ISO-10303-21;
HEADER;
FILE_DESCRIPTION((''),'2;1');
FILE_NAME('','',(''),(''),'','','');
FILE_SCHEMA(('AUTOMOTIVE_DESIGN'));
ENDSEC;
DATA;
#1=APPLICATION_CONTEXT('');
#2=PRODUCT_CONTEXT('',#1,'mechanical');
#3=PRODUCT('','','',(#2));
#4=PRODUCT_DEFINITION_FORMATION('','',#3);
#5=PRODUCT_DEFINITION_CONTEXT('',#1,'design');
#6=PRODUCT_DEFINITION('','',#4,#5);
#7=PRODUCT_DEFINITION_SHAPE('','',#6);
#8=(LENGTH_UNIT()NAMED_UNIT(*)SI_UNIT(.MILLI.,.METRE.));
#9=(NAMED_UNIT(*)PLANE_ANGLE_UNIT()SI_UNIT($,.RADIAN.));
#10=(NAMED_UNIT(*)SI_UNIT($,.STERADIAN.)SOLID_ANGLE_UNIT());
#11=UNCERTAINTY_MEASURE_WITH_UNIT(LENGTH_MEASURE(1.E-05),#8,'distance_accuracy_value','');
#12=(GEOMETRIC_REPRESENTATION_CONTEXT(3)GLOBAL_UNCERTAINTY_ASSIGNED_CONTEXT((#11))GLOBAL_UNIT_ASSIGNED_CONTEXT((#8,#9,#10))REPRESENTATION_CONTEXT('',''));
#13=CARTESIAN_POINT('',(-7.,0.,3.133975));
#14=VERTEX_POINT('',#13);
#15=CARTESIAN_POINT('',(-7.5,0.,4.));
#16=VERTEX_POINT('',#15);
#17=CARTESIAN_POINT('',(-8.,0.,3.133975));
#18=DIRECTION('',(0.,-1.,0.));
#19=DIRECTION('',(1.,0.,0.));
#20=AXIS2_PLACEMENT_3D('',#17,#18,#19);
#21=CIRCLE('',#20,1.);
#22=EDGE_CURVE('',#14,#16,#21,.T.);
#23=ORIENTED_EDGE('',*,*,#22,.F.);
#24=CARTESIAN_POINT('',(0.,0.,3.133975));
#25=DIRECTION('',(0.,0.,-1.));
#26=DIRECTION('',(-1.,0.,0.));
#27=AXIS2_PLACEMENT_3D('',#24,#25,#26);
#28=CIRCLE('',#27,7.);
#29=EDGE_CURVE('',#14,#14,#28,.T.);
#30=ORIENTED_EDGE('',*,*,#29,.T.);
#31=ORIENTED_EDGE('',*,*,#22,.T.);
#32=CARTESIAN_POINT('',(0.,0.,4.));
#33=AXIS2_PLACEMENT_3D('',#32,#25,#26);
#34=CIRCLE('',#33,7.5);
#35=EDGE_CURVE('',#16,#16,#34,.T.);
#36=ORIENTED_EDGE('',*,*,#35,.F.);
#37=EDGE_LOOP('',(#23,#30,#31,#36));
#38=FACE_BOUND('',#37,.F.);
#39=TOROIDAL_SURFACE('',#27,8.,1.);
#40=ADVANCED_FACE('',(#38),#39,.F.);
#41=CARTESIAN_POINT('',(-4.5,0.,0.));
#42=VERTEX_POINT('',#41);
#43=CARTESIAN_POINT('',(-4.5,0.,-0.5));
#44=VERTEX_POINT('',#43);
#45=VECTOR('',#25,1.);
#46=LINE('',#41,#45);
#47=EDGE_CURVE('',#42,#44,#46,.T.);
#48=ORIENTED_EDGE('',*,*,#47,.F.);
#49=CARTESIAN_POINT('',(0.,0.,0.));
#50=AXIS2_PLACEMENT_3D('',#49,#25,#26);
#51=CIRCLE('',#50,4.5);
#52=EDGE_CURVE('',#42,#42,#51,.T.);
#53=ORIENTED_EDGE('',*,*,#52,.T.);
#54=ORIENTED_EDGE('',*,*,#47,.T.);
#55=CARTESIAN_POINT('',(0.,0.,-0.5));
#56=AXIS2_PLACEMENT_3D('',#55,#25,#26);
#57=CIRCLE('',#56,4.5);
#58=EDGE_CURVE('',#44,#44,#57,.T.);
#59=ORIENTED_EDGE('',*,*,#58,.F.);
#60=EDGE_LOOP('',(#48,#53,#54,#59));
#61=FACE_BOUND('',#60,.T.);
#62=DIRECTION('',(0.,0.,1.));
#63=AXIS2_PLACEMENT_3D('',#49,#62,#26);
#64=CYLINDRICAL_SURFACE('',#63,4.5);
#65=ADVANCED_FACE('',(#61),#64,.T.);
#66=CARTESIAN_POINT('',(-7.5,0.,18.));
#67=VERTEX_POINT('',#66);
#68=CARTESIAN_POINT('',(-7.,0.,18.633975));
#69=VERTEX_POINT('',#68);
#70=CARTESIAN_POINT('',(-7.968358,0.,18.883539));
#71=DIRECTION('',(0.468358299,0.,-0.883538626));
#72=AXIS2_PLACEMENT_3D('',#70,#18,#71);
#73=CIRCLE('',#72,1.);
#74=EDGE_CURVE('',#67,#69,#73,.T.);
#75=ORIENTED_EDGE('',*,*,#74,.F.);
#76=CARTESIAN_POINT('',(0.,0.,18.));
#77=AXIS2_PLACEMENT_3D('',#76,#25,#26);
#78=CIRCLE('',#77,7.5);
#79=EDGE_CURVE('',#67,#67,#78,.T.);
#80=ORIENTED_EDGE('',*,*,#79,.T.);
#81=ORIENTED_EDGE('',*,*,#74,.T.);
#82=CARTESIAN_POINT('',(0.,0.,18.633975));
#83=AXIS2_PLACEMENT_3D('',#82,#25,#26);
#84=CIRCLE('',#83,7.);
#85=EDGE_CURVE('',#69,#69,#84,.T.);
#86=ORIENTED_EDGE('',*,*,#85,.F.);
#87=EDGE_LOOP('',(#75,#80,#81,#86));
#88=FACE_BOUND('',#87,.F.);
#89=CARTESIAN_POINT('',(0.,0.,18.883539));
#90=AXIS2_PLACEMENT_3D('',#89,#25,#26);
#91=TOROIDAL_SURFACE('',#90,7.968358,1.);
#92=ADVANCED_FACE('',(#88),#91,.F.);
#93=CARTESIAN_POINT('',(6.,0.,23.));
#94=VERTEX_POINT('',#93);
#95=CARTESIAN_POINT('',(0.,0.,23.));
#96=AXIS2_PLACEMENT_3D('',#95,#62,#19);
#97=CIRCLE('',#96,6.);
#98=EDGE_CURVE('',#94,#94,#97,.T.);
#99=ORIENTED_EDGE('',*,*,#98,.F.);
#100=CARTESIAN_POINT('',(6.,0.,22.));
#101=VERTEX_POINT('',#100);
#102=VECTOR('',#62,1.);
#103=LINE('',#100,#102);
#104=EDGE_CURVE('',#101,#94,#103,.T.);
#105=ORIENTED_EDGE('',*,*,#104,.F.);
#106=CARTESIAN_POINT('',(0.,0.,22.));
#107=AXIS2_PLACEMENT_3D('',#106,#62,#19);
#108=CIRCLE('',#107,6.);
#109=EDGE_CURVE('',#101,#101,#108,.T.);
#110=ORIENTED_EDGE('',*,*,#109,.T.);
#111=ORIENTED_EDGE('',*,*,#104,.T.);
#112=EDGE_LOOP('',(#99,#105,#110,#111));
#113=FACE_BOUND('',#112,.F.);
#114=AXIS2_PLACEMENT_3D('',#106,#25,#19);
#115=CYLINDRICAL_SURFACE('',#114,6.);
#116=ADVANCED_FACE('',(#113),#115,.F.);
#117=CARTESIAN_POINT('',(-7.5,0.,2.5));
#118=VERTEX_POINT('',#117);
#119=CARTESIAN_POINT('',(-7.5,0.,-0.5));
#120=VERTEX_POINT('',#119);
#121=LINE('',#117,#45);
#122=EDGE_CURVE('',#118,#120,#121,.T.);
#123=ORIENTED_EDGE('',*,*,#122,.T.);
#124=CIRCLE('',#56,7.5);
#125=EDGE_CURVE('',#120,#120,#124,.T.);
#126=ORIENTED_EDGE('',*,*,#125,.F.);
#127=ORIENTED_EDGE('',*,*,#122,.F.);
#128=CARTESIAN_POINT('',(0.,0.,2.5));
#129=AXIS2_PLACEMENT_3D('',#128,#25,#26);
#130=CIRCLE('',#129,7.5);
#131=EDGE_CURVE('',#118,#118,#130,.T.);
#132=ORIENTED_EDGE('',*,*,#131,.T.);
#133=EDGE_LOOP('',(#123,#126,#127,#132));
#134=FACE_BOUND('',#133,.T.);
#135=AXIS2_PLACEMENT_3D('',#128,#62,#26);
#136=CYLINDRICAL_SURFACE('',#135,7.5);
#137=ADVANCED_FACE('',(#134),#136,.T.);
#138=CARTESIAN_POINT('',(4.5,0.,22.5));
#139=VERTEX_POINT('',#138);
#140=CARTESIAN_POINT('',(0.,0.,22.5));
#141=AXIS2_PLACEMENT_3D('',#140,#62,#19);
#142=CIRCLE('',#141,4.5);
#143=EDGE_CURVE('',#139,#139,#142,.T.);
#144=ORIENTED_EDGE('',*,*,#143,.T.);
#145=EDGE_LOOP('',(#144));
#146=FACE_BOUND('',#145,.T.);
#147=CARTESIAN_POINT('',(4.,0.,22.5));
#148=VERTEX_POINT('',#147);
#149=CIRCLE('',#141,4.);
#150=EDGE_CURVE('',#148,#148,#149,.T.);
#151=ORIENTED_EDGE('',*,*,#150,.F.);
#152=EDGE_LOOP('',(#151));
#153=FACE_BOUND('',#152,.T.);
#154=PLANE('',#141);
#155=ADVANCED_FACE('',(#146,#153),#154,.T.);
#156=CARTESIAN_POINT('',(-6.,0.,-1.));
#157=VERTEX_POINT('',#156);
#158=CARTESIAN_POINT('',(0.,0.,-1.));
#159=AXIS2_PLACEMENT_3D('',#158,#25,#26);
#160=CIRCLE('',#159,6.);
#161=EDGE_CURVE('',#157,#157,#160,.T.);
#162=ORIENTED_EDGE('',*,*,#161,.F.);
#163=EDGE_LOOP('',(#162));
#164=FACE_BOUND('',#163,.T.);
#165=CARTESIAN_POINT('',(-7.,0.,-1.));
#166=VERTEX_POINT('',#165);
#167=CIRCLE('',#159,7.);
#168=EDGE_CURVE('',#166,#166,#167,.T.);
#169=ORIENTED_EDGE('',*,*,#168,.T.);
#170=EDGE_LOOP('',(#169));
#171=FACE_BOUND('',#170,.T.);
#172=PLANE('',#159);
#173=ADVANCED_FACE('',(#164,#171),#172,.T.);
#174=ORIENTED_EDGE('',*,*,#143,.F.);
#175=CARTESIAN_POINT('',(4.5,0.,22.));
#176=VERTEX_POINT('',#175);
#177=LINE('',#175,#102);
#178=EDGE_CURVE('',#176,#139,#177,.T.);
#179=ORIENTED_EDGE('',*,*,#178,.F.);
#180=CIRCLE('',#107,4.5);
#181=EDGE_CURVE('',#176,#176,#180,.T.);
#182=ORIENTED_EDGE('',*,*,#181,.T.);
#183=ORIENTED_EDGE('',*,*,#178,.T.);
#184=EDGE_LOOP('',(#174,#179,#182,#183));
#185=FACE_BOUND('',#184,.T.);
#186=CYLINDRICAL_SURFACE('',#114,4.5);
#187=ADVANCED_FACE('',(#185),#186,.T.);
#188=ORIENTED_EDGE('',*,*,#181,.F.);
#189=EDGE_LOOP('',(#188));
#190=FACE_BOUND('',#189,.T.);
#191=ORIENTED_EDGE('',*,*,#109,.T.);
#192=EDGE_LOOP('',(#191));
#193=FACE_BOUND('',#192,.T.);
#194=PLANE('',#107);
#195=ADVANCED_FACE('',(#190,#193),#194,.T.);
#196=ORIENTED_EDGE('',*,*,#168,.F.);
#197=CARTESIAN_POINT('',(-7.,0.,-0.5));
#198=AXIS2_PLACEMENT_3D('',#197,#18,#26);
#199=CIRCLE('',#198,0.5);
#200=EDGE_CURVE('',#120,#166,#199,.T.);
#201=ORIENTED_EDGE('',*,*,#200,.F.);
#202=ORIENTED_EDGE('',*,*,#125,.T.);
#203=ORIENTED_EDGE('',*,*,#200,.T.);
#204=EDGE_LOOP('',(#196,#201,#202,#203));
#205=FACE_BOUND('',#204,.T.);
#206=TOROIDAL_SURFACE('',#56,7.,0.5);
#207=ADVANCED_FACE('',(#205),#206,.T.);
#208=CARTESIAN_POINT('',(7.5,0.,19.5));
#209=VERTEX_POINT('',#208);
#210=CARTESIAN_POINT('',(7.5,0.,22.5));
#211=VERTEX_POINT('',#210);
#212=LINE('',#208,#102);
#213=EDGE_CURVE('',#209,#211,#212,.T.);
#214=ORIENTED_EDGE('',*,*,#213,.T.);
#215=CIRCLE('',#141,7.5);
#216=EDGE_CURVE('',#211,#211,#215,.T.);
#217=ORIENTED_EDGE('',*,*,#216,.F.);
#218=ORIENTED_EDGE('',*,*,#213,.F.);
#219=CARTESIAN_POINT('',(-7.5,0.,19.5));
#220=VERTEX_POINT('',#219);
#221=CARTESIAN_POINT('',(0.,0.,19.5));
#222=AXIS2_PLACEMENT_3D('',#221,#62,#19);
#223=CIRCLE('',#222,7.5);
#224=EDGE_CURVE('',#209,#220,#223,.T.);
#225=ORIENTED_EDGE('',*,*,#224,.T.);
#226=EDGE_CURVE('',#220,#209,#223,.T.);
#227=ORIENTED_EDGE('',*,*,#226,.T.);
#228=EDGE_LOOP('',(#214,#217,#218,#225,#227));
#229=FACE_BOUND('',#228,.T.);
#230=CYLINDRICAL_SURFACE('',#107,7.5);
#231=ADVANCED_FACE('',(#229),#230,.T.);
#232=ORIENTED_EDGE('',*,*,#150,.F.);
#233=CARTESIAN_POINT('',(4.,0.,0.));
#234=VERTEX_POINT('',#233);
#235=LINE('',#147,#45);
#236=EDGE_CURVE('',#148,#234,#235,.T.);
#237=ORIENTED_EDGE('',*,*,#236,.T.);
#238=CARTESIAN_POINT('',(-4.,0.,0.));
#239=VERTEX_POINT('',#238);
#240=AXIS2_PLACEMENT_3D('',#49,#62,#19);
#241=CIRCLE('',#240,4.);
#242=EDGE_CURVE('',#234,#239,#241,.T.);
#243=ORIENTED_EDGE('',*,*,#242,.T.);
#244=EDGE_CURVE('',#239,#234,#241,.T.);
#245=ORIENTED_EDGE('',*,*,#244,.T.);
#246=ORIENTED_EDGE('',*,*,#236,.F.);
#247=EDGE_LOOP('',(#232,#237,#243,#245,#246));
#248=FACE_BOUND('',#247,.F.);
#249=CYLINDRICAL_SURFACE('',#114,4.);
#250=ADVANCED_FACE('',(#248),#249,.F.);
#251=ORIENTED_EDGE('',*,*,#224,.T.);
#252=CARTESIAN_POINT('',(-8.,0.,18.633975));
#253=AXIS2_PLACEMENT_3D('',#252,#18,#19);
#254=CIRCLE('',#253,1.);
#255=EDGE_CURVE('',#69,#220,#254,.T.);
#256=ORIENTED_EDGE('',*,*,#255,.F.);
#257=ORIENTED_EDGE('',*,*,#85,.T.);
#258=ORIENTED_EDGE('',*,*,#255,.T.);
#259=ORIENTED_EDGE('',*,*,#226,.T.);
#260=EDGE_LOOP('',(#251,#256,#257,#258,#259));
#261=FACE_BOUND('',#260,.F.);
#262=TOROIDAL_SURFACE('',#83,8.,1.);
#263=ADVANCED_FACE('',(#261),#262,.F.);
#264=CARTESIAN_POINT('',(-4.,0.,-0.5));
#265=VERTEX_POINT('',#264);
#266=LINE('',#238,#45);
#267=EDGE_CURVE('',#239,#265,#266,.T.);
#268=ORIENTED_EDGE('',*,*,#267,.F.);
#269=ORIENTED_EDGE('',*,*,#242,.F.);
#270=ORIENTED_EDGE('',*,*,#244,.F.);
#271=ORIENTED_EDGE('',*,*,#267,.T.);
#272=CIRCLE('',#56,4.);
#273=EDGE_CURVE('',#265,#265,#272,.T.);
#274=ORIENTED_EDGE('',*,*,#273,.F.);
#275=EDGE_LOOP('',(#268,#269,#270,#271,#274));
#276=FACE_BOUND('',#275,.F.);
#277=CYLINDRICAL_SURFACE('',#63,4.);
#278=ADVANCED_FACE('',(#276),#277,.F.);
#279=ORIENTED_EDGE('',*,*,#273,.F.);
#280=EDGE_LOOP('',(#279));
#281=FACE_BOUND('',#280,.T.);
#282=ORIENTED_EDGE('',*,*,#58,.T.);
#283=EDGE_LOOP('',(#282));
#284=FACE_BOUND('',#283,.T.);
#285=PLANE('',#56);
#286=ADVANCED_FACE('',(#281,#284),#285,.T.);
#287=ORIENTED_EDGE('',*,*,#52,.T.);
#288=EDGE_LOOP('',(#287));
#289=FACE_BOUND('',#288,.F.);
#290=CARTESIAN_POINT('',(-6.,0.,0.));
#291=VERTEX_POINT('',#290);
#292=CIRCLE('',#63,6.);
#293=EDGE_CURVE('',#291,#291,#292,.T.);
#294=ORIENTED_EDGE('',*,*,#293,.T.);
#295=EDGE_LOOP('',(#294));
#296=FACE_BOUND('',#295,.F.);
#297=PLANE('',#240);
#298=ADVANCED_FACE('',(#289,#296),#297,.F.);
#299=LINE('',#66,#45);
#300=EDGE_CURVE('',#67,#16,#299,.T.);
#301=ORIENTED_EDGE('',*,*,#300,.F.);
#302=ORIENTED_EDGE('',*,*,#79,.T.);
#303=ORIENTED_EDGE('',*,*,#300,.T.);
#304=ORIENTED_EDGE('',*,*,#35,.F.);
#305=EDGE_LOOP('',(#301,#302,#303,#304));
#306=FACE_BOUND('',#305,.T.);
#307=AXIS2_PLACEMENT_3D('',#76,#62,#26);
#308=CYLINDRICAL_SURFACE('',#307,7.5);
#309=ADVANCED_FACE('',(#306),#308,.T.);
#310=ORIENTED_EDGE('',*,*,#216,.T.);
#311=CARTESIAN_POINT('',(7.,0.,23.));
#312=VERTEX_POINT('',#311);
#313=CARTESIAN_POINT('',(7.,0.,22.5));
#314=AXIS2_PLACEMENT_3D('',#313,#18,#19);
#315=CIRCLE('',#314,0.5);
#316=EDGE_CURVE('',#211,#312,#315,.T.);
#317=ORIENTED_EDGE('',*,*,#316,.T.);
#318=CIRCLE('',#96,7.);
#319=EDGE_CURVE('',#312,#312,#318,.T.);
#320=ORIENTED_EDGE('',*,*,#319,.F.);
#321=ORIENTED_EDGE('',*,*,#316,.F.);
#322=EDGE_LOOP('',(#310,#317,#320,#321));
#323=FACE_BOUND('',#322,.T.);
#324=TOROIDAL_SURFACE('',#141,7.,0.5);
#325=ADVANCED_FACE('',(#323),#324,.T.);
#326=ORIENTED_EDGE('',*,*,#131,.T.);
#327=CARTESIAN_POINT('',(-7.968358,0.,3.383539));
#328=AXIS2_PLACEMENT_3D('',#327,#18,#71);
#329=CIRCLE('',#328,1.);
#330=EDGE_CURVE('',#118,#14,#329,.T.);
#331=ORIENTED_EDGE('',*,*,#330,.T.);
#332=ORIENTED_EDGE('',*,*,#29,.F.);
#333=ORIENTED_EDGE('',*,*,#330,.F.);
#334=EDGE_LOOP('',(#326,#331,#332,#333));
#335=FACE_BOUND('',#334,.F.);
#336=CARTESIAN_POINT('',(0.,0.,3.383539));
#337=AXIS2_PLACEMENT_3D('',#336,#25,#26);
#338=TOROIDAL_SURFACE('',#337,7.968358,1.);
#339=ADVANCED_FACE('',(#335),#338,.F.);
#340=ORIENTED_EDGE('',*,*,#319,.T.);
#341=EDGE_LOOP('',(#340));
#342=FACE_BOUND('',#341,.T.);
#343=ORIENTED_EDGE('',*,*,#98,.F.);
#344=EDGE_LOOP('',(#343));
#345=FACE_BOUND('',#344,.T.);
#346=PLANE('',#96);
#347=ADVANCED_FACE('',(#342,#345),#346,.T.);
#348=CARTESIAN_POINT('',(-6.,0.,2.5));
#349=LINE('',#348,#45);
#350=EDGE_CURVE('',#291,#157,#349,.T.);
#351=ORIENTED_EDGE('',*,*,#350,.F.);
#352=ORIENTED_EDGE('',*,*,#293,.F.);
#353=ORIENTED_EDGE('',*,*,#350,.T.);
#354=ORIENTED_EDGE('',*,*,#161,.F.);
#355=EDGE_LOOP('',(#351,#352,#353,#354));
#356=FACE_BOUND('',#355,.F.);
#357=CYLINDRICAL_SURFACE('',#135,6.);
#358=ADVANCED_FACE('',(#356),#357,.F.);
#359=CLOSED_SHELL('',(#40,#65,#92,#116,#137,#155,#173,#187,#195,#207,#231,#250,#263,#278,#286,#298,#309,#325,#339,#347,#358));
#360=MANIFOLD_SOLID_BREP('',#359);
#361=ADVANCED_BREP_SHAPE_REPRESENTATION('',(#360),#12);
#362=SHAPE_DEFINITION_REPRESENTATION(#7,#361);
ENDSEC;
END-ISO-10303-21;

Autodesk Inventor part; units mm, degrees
ref_plane "YZ Plane" through (0, 0, 0) normal (1, 0, 0) x (0, 1, 0)
ref_plane "XZ Plane" through (0, 0, 0) normal (0, 1, 0) x (-1, 0, 0)
ref_plane "XY Plane" through (0, 0, 0) normal (0, 0, 1) x (1, 0, 0)
sketch "Sketch1" plane through (0, 0, 0) normal (0, 0, 1) x (1, 0, 0)
  circle A0 centre (0, 0) radius 4
  circle A1 centre (0, 0) radius 6
  dimension "d0" = 8
  dimension "d2" = 12
sketch "Sketch1 outline for Extrusion1" plane through (0, 0, 0) normal (0, 0, 1) x (1, 0, 0)
  circle A0 centre (0, 0) radius 6
  circle A1 centre (0, 0) radius 4
extrude "Extrusion1" add sketch "Sketch1 outline for Extrusion1" along normal blind 22
sketch "Sketch2" plane through (0, 0, 22) normal (0, 0, 1) x (1, 0, 0)
  circle A0 centre (0, 0) radius 6 projected
  circle A1 centre (0, 0) radius 7.5
  dimension "d5" = 15
sketch "Sketch2 outline for Extrusion2" plane through (0, 0, 22) normal (0, 0, 1) x (1, 0, 0)
  circle A0 centre (0, 0) radius 7.5
  circle A1 centre (0, 0) radius 6
extrude "Extrusion2" add sketch "Sketch2 outline for Extrusion2" along normal blind 1 and the other way blind 2.5
sketch "Sketch3" plane through (0, 0, 19.5) normal (0, 0, -1) x (-1, 0, 0)
  circle A0 centre (0, 0) radius 6 projected
  circle A1 centre (0, 0) radius 7.5 projected
  circle A2 centre (0, 0) radius 7
  dimension "d11" = 14
sketch "Sketch3 outline for Extrusion3" plane through (0, 0, 19.5) normal (0, 0, -1) x (-1, 0, 0)
  circle A0 centre (0, 0) radius 7
  circle A1 centre (0, 0) radius 6
extrude "Extrusion3" add sketch "Sketch3 outline for Extrusion3" along normal blind 1.5
sketch "Sketch4" plane through (0, 0, 18) normal (0, 0, -1) x (-1, 0, 0)
  circle A0 centre (0, 0) radius 6 projected
  circle A1 centre (0, 0) radius 7 projected
  circle A2 centre (0, 0) radius 7.5
  dimension "d15" = 15
sketch "Sketch4 outline for Extrusion4" plane through (0, 0, 18) normal (0, 0, -1) x (-1, 0, 0)
  circle A0 centre (0, 0) radius 7.5
  circle A1 centre (0, 0) radius 6
extrude "Extrusion4" add sketch "Sketch4 outline for Extrusion4" along normal blind 14
sketch "Sketch5" plane through (0, 0, 4) normal (0, 0, -1) x (-1, 0, 0)
  circle A0 centre (0, 0) radius 6 projected
  circle A1 centre (0, 0) radius 7.5 projected
  circle A2 centre (0, 0) radius 7
  dimension "d19" = 14
sketch "Sketch5 outline for Extrusion5" plane through (0, 0, 4) normal (0, 0, -1) x (-1, 0, 0)
  circle A0 centre (0, 0) radius 7
  circle A1 centre (0, 0) radius 6
extrude "Extrusion5" add sketch "Sketch5 outline for Extrusion5" along normal blind 1.5
sketch "Sketch6" plane through (0, 0, 2.5) normal (0, 0, -1) x (-1, 0, 0)
  circle A0 centre (0, 0) radius 6 projected
  circle A1 centre (0, 0) radius 7 projected
  circle A2 centre (0, 0) radius 7.5
  dimension "d23" = 15
sketch "Sketch6 outline for Extrusion6" plane through (0, 0, 2.5) normal (0, 0, -1) x (-1, 0, 0)
  circle A0 centre (0, 0) radius 7.5
  circle A1 centre (0, 0) radius 6
extrude "Extrusion6" add sketch "Sketch6 outline for Extrusion6" along normal blind 3.5
fillet "Fillet1" radius 1 4 edges at (7, 0, 19.5) (7, 0, 4) (7, 0, 2.5) (7, 0, 18)
fillet "Fillet2" radius 0.5 2 edges at (-7.5, 0, 23) (7.5, 0, -1)
sketch "Sketch7" plane through (0, 0, 22) normal (0, 0, 1) x (1, 0, 0)
  circle A0 centre (0, 0) radius 4 projected
  circle A1 centre (0, 0) radius 6 projected
  circle A2 centre (0, 0) radius 4.5
  dimension "d29" = 9
sketch "Sketch7 outline for Extrusion7" plane through (0, 0, 22) normal (0, 0, 1) x (1, 0, 0)
  circle A0 centre (0, 0) radius 4.5
  circle A1 centre (0, 0) radius 4
extrude "Extrusion7" add sketch "Sketch7 outline for Extrusion7" along normal blind 0.5
sketch "Sketch8" plane through (0, 0, 0) normal (0, 0, -1) x (-1, 0, 0)
  circle A0 centre (0, 0) radius 4 projected
  circle A1 centre (0, 0) radius 6 projected
  circle A2 centre (0, 0) radius 4.5
  dimension "d34" = 9
sketch "Sketch8 outline for Extrusion8" plane through (0, 0, 0) normal (0, 0, -1) x (-1, 0, 0)
  circle A0 centre (0, 0) radius 4.5
  circle A1 centre (0, 0) radius 4
extrude "Extrusion8" add sketch "Sketch8 outline for Extrusion8" along normal blind 0.5
properties part number "lineair bearing 8 x15 x 24"
